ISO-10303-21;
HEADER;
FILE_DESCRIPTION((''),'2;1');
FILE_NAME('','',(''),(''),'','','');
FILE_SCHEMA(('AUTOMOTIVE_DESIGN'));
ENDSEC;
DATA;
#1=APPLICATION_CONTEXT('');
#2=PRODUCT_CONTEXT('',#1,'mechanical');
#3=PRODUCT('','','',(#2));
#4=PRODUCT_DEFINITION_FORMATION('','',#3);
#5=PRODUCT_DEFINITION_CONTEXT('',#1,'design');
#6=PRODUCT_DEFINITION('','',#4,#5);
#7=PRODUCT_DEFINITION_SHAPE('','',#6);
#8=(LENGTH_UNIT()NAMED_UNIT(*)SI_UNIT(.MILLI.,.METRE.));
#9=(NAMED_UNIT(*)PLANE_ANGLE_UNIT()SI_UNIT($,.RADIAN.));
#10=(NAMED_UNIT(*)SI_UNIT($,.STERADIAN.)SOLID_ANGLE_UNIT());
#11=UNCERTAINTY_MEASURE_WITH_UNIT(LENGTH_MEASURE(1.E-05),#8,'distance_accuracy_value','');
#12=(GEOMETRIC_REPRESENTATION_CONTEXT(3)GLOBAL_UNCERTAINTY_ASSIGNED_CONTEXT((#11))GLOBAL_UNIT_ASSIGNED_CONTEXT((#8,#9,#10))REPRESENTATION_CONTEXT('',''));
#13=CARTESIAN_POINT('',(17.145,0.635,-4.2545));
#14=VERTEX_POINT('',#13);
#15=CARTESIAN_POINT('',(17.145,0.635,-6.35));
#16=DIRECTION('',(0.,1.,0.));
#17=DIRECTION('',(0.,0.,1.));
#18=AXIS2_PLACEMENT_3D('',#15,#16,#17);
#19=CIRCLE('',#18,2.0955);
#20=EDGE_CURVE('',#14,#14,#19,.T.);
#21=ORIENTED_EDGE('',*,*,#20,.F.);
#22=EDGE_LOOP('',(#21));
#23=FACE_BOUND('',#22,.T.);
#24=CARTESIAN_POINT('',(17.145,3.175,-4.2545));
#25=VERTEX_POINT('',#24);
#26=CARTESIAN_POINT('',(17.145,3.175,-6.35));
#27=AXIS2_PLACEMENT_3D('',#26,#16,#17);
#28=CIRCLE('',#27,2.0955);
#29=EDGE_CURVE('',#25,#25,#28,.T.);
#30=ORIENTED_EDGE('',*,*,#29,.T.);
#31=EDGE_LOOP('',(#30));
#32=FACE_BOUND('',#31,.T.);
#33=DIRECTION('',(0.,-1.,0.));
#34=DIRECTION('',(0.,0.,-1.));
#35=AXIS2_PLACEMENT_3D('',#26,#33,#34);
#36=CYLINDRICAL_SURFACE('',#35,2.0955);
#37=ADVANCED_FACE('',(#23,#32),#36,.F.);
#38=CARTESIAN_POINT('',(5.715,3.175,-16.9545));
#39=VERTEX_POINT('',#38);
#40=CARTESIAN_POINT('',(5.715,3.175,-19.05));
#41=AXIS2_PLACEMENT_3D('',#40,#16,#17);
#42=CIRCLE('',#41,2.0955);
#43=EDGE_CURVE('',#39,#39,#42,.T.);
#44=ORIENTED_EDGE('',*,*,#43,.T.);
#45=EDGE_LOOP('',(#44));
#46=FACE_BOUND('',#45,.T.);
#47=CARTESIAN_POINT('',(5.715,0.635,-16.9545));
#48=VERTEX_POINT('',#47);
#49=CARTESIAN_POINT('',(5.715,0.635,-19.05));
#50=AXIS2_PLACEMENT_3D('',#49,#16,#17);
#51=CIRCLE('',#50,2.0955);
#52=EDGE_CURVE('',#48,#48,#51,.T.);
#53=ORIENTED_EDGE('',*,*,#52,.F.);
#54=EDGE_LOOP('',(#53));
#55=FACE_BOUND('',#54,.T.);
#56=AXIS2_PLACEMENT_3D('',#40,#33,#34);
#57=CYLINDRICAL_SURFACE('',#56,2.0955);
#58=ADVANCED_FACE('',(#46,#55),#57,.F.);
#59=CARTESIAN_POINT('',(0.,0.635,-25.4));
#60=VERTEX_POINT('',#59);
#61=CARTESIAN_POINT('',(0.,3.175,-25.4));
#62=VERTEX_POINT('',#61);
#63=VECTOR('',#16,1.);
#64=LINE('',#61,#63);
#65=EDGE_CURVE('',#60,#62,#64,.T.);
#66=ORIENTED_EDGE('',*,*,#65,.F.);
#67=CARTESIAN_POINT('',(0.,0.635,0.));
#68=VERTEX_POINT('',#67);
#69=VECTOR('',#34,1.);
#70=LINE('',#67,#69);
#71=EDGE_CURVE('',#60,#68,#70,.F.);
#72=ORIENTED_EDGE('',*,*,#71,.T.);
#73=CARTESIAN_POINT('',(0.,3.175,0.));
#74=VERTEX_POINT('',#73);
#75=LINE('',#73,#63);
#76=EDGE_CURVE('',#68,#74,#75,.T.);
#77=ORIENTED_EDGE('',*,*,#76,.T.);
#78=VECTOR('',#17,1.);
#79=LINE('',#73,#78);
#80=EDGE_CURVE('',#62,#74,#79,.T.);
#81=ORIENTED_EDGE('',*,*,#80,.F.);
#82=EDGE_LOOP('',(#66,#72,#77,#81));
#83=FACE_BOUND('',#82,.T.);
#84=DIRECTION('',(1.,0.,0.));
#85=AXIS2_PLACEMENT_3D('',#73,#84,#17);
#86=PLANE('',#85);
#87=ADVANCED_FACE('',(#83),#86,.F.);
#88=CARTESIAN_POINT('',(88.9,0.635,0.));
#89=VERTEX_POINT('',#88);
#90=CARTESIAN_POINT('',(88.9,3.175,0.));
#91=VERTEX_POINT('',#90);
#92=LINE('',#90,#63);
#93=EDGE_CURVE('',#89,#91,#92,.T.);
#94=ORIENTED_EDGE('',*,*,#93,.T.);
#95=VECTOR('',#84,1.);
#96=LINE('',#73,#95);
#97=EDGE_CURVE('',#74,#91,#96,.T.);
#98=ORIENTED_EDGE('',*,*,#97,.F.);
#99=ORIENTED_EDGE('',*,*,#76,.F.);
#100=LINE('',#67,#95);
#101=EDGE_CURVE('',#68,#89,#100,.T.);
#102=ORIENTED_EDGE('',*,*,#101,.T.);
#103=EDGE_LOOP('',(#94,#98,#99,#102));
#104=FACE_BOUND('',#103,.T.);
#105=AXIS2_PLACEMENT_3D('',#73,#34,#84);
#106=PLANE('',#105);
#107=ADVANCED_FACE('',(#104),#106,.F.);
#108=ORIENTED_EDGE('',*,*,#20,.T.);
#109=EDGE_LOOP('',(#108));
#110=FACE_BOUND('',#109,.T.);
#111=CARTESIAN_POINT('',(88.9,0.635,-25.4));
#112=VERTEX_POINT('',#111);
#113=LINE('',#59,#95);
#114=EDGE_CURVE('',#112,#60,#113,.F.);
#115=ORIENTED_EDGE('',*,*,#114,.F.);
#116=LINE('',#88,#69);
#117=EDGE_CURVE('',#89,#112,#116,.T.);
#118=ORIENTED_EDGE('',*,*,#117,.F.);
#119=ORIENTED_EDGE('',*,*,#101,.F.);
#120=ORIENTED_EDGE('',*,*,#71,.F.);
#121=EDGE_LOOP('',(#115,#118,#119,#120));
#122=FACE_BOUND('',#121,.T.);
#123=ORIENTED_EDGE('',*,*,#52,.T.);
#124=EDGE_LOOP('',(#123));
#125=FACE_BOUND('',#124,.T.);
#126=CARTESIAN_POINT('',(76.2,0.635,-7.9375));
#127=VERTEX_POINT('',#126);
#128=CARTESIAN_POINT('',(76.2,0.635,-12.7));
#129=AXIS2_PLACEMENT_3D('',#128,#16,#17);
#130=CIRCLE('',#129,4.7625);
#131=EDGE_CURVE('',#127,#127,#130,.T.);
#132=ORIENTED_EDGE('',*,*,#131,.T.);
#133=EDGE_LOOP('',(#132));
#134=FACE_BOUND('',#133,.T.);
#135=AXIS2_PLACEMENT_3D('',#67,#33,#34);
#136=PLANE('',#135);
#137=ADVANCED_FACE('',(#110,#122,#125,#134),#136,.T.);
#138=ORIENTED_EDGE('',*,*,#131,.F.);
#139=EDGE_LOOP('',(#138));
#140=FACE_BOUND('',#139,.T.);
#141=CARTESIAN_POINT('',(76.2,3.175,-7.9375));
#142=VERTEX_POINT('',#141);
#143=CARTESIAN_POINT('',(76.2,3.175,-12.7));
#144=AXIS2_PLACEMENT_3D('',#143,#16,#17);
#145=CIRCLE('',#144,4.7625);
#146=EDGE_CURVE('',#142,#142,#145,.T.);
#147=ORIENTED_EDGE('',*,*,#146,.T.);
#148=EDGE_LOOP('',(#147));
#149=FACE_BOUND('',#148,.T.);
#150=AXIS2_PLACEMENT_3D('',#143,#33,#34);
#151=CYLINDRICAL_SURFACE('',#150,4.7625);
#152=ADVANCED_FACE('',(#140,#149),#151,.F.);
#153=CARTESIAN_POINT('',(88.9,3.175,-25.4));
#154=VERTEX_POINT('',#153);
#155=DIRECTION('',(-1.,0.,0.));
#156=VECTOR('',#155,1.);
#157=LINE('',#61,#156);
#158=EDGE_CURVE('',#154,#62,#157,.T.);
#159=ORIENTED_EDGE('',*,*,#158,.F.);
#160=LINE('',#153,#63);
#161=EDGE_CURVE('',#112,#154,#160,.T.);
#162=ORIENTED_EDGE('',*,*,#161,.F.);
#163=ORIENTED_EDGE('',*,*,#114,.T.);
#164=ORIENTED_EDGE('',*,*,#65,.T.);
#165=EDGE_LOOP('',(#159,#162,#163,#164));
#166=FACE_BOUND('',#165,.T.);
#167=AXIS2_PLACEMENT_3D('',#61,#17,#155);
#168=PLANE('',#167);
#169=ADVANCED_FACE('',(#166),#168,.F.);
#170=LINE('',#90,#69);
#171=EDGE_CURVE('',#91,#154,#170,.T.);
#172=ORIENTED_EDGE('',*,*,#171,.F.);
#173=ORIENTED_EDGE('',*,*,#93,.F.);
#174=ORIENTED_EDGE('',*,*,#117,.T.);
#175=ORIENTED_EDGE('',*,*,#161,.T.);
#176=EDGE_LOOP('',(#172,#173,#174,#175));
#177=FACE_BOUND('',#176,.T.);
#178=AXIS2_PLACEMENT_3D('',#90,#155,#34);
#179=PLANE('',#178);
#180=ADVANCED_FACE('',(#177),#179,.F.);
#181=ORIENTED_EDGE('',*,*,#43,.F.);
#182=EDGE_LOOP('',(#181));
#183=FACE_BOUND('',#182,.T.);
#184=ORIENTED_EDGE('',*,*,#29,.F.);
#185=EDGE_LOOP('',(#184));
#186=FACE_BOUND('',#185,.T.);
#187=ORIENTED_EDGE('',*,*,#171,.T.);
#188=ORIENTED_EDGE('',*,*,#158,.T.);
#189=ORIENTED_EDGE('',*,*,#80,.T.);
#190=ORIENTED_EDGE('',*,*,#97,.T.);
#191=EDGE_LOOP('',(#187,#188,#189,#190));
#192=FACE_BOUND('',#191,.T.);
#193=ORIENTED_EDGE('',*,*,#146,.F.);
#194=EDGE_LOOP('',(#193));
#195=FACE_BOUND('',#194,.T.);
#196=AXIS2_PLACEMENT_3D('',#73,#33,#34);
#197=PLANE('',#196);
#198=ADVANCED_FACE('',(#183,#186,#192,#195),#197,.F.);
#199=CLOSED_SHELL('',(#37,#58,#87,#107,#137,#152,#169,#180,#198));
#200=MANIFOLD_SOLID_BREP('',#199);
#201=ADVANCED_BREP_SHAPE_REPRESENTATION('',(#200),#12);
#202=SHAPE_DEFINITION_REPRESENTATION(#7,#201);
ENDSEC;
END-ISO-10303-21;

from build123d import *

# Parameters (mm, degrees)
SKETCH1_W                  = 88.9
SKETCH1_H                  = 25.4
BOSS_EXTRUDE1_DEPTH        = 3.175
SKETCH2_R                  = 4.7625
SKETCH2_R_2                = 2.0955
CUT_EXTRUDE1_DEPTH         = 3.175
CONVERT_SOLID1_OUTLINE_W   = 88.9
CONVERT_SOLID1_OUTLINE_H   = 25.4
CONVERT_SOLID1_OUTLINE_R   = 2.0955
CONVERT_SOLID1_OUTLINE_R_2 = 4.7625
CONVERT_SOLID1_DEPTH       = 0.635


# Read off the part's stored shape, not the designer's step: Convert-Solid1
with BuildPart() as part:
    # Sketch1 → Boss-Extrude1 (new body)
    with BuildSketch(Plane(origin=(0, 0, 0), x_dir=(1, 0, 0), z_dir=(0, 1, 0))):
        with Locations((44.45, 12.7)):
            Rectangle(SKETCH1_W, SKETCH1_H)
    extrude(amount=BOSS_EXTRUDE1_DEPTH)

    # Sketch2 → Cut-Extrude1 (cut)
    with BuildSketch(Plane(origin=(0, 3.175, 0), x_dir=(1, 0, 0), z_dir=(0, 1, 0))):
        with Locations(Location((76.2, 12.7, 0), (0, 0, 270))):
            Circle(SKETCH2_R)
        with Locations(Location((5.715, 19.05, 0), (0, 0, 270))):
            Circle(SKETCH2_R_2)
        with Locations(Location((17.145, 6.35, 0), (0, 0, 270))):
            Circle(SKETCH2_R_2)
    extrude(amount=-CUT_EXTRUDE1_DEPTH, mode=Mode.SUBTRACT)

    # Convert-Solid1 outline → Convert-Solid1 (cut)
    with BuildSketch(Plane(origin=(0, 0, 0), x_dir=(1, 0, 0), z_dir=(0, 1, 0))):
        with Locations((44.45, 12.7)):
            Rectangle(CONVERT_SOLID1_OUTLINE_W, CONVERT_SOLID1_OUTLINE_H)
        with Locations((17.145, 6.35)):
            Circle(CONVERT_SOLID1_OUTLINE_R, mode=Mode.SUBTRACT)
        with Locations((76.2, 12.7)):
            Circle(CONVERT_SOLID1_OUTLINE_R_2, mode=Mode.SUBTRACT)
        with Locations((5.715, 19.05)):
            Circle(CONVERT_SOLID1_OUTLINE_R, mode=Mode.SUBTRACT)
    extrude(amount=CONVERT_SOLID1_DEPTH, mode=Mode.SUBTRACT)


solid = part.part
